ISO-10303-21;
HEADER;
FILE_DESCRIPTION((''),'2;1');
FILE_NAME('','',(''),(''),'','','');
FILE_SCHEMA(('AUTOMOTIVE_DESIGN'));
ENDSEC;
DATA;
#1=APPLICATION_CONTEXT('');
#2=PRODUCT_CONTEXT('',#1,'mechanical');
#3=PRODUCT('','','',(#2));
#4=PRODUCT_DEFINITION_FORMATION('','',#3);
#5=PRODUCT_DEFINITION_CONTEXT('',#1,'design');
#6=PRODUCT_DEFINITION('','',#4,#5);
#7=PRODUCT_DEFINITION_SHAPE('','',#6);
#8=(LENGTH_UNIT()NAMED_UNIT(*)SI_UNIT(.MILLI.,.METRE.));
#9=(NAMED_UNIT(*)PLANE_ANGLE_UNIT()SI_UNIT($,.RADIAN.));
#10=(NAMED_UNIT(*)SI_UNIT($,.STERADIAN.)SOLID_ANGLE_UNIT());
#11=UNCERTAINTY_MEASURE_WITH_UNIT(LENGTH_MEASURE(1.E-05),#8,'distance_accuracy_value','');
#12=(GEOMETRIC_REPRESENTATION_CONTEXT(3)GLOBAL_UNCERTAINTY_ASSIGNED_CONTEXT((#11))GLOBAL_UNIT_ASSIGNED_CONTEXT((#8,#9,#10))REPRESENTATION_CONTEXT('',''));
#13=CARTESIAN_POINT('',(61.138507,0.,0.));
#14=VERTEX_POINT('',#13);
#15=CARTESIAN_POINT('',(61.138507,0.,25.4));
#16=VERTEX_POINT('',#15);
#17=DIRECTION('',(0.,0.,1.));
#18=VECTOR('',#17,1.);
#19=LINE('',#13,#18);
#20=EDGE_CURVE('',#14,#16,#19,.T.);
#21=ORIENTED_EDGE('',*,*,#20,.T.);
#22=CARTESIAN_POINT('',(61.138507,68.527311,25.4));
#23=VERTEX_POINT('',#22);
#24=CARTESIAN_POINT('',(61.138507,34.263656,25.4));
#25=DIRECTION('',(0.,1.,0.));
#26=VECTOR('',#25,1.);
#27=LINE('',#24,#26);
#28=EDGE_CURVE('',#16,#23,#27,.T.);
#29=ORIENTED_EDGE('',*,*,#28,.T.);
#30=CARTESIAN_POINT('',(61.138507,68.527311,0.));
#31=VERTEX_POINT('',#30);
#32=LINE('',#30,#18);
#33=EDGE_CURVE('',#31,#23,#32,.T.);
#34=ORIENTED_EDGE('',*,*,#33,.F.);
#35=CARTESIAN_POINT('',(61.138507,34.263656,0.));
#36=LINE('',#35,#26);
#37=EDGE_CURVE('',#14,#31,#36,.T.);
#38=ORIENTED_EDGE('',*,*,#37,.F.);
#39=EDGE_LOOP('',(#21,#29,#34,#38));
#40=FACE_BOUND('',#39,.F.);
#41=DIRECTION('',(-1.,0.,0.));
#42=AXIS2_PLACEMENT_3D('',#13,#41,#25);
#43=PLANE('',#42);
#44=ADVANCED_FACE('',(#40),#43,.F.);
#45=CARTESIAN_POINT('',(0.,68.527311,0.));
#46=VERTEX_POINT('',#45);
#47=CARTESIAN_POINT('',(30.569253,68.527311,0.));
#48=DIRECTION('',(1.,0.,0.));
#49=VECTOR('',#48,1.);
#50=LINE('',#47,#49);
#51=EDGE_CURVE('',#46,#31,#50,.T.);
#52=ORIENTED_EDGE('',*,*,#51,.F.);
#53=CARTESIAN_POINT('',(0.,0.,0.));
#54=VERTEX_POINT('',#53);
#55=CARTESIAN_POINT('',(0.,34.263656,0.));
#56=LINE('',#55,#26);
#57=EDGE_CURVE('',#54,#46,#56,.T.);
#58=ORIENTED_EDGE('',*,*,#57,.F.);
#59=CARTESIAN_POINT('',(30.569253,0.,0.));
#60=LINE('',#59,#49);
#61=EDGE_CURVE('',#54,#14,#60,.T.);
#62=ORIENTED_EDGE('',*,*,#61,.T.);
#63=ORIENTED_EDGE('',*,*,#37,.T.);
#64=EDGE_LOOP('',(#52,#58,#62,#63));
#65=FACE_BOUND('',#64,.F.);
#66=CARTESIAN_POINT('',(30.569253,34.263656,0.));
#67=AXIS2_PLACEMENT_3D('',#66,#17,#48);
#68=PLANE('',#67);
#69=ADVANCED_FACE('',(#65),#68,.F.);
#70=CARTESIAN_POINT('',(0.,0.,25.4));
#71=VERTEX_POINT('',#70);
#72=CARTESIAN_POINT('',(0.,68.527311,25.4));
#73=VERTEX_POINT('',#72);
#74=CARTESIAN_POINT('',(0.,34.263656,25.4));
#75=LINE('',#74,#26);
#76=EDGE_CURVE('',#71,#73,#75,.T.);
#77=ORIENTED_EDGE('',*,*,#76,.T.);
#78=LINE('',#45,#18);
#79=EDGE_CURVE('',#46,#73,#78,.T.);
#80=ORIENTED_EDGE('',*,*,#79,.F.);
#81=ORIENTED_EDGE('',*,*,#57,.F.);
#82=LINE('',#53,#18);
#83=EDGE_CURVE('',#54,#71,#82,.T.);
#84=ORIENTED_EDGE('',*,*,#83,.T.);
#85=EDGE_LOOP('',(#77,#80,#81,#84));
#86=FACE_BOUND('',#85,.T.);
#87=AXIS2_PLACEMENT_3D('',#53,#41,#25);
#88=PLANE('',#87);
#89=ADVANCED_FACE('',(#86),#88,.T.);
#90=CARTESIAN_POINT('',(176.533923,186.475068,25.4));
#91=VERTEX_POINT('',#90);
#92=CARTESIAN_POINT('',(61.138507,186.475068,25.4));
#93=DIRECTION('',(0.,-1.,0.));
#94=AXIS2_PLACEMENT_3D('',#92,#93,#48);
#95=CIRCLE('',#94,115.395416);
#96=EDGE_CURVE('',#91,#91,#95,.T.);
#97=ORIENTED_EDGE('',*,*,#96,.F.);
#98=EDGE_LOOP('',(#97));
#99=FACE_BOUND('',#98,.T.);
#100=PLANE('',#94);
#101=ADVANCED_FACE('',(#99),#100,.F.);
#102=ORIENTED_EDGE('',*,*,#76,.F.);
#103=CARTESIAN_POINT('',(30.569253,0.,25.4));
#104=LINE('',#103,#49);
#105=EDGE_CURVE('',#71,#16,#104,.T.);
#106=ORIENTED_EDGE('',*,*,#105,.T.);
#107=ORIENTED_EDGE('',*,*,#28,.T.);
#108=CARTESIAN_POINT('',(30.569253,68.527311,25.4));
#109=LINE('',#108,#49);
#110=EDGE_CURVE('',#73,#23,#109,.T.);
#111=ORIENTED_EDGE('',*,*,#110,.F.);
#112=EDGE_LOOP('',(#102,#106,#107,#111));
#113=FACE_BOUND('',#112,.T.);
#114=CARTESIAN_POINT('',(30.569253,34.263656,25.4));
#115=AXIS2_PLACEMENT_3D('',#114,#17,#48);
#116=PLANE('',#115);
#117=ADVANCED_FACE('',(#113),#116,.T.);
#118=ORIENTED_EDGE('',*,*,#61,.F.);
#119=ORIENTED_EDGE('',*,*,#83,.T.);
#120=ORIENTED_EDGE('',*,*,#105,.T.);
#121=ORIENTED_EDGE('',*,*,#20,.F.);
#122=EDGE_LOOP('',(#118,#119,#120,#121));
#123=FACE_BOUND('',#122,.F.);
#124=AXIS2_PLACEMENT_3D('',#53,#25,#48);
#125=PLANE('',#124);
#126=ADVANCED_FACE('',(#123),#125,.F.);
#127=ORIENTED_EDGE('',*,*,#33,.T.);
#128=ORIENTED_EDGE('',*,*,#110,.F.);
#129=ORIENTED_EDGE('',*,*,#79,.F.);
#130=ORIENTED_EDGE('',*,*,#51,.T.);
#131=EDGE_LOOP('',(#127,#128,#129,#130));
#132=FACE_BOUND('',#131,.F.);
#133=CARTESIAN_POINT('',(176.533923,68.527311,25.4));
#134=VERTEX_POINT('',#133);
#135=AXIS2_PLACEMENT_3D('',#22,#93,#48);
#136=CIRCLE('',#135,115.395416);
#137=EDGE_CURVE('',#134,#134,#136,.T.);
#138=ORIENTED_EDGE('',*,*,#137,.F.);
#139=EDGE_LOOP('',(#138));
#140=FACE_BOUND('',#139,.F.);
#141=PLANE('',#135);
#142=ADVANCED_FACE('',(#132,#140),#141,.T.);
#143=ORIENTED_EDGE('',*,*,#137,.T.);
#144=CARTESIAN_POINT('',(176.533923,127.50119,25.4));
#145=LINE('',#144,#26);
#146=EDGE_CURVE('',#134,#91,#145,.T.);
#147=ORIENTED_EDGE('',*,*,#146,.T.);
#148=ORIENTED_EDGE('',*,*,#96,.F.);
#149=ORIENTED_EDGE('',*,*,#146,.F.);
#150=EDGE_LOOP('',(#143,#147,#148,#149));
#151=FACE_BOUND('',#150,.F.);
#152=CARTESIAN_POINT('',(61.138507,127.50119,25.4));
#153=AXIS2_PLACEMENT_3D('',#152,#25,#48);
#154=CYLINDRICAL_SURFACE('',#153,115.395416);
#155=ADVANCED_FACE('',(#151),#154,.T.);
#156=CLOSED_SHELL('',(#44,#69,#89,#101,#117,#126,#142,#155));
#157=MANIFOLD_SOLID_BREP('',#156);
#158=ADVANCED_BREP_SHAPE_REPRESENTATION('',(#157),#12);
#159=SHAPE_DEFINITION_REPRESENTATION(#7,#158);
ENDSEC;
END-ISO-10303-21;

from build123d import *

# Parameters (mm, degrees)
F0_W     = 61.1385069788
F0_H     = 68.5273110867
F1_DEPTH = 25.4
F2_W     = 115.3954155743
F2_H     = 117.9477572441


# Not quite as in the source:
# - the program builds the solid bodies; features that only make, move or delete a surface that nothing else refers to are left out


with BuildPart() as f1:
    # F0 (on Top) → F1 (new body)
    with BuildSketch(Plane.XY):
        with Locations((30.5692534894, 34.2636555433)):
            Rectangle(F0_W, F0_H)
    extrude(amount=F1_DEPTH)

    # F2 (on face) → F4 (revolve)
    with BuildSketch(Plane.XY.offset(25.4)):
        with Locations((118.8362147659, 127.5011897087)):
            Rectangle(F2_W, F2_H)
    revolve(axis=Axis((61.1385069788, 34.2636555433, 25.4), (0, -1, 0)))


solid = f1.part
